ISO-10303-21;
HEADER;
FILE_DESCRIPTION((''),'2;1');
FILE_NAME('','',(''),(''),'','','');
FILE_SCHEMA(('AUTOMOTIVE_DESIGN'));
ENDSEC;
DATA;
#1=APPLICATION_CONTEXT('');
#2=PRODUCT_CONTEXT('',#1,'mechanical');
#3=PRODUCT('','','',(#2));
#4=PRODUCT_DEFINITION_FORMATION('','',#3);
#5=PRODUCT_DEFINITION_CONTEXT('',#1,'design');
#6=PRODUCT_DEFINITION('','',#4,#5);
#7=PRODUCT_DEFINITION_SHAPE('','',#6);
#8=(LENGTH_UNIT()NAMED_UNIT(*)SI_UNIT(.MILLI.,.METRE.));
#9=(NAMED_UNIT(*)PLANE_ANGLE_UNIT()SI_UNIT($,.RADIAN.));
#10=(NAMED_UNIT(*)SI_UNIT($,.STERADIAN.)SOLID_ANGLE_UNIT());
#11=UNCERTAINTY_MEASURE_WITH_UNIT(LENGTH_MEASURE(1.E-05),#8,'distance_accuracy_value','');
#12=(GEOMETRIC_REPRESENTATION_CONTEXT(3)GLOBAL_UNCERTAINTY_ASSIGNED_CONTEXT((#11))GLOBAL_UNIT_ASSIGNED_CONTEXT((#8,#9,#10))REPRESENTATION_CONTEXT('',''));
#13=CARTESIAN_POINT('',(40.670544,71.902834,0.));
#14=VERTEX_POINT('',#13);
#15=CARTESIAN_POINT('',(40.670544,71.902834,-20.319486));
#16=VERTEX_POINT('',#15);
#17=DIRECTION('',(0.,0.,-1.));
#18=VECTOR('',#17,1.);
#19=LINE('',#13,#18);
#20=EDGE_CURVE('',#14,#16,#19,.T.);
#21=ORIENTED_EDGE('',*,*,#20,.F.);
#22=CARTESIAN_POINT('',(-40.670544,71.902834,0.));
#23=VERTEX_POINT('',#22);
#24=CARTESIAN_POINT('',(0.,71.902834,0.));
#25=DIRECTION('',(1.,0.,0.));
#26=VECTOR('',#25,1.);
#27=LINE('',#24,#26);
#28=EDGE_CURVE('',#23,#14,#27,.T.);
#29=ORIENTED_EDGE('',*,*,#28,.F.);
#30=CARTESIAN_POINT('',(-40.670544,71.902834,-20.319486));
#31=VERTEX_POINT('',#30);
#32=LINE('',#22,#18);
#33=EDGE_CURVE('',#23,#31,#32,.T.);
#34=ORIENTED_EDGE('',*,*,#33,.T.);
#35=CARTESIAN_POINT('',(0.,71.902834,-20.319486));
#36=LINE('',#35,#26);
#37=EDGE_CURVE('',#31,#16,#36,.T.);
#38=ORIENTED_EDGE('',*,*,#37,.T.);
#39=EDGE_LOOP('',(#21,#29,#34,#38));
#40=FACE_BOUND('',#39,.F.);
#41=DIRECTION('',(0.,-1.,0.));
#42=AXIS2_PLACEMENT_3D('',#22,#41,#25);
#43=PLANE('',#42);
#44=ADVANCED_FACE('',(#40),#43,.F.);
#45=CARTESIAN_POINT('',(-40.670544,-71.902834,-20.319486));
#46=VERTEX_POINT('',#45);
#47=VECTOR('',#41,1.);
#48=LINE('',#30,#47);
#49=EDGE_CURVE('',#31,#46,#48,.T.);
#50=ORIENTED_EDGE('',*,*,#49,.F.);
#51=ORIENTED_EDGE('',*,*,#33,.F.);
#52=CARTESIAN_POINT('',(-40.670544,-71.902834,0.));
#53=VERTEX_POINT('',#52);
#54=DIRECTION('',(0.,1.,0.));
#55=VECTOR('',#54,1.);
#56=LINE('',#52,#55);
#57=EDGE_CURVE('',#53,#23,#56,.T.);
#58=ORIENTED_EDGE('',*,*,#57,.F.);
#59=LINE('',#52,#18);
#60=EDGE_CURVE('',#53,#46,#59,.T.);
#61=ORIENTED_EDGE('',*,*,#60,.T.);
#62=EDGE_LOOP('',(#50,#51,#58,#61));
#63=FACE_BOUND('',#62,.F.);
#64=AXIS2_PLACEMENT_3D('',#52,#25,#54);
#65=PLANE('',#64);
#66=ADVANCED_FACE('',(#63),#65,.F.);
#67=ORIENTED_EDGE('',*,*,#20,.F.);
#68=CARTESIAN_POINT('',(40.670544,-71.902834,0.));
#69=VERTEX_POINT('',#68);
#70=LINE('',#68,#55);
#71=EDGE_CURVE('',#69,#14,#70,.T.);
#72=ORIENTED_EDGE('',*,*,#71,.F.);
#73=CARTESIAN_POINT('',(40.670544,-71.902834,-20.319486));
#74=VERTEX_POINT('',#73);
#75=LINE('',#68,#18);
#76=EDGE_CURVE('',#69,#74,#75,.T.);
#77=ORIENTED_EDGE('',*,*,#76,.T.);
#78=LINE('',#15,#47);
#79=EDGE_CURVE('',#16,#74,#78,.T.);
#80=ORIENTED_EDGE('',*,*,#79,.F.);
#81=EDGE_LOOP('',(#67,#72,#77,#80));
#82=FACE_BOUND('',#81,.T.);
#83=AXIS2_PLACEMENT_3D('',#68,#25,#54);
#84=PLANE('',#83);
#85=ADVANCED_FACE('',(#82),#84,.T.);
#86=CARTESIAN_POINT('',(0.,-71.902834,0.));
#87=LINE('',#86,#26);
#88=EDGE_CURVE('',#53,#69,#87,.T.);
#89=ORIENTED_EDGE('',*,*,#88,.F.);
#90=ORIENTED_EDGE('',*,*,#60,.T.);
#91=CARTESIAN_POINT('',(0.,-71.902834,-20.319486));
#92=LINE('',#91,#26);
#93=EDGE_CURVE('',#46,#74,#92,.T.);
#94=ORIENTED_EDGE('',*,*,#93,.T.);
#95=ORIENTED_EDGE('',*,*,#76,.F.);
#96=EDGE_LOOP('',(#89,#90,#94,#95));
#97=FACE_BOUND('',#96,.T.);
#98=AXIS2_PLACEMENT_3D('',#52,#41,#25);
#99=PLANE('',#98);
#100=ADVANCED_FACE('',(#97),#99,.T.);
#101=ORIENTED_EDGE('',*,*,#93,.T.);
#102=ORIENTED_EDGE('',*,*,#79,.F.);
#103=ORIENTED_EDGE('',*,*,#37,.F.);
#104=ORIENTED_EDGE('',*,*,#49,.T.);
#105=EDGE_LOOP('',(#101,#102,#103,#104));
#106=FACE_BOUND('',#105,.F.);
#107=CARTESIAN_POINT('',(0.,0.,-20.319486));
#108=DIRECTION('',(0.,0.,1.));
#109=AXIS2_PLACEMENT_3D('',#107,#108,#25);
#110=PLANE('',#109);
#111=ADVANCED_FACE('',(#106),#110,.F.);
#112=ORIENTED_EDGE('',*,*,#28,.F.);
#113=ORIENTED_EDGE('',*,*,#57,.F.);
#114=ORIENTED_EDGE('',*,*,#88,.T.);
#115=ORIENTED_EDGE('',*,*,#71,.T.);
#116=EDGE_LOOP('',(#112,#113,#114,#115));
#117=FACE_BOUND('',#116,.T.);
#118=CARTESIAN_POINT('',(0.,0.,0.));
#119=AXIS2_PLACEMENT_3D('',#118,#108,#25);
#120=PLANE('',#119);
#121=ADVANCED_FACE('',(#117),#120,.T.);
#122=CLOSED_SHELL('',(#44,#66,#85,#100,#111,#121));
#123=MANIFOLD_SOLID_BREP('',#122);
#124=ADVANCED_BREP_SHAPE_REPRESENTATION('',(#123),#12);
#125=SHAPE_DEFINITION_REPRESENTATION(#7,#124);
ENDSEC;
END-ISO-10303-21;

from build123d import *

# Parameters (mm, degrees)
F0_W     = 81.3410878181
F0_H     = 143.805667758
F0_W_2   = 72.0662102103
F0_H_2   = 133.9904665947
F1_DEPTH = 20.3194860369
F2_W     = 81.3410878181
F2_H     = 20.3194860369
F3_DEPTH = 139.7007852793


# Not quite as in the source:
# - the program builds the solid bodies; features that only make, move or delete a surface that nothing else refers to are left out


with BuildPart() as f1:
    # F0 (on Top) → F1 (new body)
    with BuildSketch(Plane.XY):
        Rectangle(F0_W, F0_H)
        Rectangle(F0_W_2, F0_H_2, mode=Mode.SUBTRACT)
    extrude(amount=-F1_DEPTH)

    # F2 (on face) → F3 (join)
    with BuildSketch(Plane.XZ.offset(71.902833879)):
        with Locations((0, -10.1597430184)):
            Rectangle(F2_W, F2_H)
    extrude(amount=-F3_DEPTH)


solid = f1.part
